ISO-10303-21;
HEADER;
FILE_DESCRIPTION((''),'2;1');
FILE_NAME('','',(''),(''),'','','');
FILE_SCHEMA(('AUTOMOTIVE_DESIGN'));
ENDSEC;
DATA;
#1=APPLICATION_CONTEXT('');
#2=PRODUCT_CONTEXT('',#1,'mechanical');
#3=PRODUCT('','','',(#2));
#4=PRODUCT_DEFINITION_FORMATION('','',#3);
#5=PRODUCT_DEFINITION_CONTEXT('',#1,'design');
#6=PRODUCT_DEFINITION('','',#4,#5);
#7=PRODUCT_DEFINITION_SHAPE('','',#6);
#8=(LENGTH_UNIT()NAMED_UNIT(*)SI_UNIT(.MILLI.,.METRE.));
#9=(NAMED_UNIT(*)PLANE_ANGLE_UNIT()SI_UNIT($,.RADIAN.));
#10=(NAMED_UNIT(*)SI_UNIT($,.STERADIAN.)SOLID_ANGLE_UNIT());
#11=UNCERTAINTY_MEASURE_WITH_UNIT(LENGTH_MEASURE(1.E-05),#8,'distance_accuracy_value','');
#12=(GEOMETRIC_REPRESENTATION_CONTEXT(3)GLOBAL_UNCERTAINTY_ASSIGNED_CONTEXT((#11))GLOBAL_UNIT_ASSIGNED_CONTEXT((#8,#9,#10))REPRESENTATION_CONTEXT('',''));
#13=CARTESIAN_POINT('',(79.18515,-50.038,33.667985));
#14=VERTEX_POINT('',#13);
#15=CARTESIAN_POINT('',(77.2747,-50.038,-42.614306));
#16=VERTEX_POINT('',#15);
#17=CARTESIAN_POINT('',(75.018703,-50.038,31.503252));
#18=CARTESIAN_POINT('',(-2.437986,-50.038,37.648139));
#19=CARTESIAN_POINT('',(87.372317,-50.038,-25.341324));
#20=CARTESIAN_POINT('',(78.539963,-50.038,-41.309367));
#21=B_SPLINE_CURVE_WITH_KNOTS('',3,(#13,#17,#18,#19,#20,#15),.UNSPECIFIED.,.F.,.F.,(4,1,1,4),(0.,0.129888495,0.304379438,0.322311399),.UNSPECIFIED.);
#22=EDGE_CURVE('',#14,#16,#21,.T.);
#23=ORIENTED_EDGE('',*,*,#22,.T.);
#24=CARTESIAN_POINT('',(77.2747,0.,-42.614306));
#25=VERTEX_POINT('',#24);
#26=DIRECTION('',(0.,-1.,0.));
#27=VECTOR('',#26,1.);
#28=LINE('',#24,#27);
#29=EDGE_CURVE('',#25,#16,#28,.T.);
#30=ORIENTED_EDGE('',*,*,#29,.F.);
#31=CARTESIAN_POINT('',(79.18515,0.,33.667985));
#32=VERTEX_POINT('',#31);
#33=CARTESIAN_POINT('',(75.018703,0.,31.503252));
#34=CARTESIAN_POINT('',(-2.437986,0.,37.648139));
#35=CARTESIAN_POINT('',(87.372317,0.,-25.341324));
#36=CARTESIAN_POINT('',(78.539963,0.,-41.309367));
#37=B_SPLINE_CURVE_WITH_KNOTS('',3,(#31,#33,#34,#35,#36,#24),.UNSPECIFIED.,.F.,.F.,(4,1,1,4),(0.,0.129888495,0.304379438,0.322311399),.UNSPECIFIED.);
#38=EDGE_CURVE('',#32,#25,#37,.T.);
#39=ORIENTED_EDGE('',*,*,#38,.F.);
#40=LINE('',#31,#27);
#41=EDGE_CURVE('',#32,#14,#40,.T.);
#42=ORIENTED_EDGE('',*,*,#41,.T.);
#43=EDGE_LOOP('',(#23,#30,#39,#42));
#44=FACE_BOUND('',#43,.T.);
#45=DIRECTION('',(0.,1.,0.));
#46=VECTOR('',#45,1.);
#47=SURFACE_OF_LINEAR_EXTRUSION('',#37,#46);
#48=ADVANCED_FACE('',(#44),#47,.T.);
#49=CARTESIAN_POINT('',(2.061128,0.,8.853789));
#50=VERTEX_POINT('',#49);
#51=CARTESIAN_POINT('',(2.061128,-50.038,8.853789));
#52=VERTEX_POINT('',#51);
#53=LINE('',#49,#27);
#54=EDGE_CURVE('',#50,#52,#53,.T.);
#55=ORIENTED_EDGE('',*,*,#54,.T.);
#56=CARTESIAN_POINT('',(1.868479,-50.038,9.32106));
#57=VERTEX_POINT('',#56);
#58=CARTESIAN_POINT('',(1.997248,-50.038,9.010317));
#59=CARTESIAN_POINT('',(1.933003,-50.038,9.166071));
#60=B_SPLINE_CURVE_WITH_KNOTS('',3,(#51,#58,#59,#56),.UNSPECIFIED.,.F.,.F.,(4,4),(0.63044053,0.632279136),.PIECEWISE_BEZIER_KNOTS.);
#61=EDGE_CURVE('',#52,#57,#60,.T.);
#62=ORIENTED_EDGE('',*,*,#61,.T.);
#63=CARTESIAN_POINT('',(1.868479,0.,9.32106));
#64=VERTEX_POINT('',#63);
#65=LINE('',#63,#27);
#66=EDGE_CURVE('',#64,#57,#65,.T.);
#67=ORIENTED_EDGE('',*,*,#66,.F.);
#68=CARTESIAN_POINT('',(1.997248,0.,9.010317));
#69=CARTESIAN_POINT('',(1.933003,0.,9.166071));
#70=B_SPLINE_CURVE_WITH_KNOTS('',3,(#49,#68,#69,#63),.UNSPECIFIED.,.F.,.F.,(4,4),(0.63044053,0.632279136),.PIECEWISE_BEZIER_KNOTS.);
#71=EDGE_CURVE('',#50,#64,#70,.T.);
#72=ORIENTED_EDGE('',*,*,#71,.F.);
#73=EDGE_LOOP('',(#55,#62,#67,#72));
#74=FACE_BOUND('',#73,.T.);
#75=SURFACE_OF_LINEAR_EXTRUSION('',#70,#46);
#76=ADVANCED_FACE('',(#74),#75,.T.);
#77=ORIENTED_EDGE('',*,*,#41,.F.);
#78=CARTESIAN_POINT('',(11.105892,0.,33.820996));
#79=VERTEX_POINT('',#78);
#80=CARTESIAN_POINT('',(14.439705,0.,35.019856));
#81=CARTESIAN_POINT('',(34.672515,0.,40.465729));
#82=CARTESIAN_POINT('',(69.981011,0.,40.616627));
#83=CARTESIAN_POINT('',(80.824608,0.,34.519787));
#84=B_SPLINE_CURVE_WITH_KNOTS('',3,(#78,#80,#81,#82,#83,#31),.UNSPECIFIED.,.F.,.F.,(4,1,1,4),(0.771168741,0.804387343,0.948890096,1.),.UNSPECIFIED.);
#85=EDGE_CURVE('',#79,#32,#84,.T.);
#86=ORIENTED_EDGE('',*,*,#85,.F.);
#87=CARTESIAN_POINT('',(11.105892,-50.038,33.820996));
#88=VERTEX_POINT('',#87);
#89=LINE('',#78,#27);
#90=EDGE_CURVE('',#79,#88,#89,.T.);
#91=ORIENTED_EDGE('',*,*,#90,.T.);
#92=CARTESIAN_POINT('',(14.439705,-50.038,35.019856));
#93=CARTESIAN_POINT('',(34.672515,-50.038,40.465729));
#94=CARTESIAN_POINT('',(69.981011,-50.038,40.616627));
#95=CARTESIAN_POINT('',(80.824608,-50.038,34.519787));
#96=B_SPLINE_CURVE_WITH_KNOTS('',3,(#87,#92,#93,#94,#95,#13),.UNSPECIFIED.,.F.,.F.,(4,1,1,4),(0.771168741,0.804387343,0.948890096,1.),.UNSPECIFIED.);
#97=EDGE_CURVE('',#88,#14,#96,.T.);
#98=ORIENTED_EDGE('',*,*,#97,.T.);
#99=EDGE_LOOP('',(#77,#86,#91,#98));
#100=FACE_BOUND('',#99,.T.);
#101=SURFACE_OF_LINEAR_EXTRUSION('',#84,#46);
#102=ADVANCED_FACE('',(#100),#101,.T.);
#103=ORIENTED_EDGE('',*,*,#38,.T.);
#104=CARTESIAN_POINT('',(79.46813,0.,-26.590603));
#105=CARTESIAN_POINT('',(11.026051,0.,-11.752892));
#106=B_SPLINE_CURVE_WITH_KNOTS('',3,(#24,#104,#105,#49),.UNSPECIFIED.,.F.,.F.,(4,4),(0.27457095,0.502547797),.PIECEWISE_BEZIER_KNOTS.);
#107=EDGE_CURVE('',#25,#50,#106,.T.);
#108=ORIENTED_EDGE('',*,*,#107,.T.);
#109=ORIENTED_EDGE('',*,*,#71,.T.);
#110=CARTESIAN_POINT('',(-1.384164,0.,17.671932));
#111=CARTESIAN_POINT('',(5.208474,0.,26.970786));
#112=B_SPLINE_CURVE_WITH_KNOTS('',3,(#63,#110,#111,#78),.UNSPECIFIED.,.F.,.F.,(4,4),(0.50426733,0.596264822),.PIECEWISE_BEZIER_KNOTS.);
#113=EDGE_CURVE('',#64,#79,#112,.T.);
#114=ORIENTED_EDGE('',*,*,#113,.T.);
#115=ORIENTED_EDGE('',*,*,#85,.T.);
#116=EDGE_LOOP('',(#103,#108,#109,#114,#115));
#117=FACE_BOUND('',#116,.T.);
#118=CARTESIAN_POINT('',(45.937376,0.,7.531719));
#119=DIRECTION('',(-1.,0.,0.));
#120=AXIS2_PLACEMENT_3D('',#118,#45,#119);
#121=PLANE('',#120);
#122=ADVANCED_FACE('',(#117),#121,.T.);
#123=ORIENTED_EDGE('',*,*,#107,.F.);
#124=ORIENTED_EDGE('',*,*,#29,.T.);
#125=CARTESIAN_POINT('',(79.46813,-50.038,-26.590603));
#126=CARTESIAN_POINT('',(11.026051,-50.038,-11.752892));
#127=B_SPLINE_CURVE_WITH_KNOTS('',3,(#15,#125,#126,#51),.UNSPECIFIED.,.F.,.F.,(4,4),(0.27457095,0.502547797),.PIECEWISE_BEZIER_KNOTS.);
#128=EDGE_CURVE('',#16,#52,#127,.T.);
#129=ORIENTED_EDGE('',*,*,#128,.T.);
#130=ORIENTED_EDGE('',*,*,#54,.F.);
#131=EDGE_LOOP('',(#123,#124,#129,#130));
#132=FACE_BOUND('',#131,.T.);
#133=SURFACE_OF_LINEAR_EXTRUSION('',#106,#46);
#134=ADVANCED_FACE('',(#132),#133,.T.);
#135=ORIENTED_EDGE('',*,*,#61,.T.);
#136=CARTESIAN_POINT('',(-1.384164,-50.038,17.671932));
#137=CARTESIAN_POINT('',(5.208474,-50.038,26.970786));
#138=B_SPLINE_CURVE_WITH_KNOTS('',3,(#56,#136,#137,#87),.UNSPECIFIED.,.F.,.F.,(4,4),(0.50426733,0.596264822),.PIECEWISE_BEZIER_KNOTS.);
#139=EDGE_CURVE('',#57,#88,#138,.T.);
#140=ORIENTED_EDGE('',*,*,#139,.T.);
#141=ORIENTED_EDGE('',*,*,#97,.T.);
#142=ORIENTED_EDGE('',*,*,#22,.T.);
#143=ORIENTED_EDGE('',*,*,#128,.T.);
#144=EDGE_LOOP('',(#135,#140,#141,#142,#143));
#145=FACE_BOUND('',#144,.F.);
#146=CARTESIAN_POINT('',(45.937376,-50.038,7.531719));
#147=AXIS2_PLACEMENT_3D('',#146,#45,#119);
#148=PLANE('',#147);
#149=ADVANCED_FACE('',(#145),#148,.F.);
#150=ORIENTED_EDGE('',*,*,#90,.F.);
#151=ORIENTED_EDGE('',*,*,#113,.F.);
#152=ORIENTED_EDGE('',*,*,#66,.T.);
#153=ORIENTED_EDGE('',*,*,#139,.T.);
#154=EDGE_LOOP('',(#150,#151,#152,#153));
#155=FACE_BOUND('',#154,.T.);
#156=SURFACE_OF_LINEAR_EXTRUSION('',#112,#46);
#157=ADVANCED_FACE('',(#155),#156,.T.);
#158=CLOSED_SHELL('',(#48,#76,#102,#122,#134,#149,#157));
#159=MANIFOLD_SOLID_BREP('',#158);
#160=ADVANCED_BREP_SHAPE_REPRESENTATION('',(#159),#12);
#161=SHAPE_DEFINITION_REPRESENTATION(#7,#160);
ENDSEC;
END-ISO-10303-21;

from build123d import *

# Parameters (mm, degrees)
F1_DEPTH = 50.038


with BuildPart() as f1:
    # F0 (on Front) → F1 (new body)
    with BuildSketch(Plane.XZ):
        with BuildLine():
            add(Edge.make_bspline(
                [(79.1851501145, 33.667985141), (75.0187026574, 31.503252156), (-2.4379861385, 37.6481391794), (87.3723170721, -25.341323607), (78.5399634882, -41.3093671709), (77.274699503, -42.6143057432)],
                knots=[0, 0, 0, 0, 0.1298884954, 0.304379438, 0.3223113992, 0.3223113992, 0.3223113992, 0.3223113992], degree=3))
            add(Edge.make_bspline(
                [(11.1058921605, 33.8209956614), (14.4397051782, 35.019855662), (34.6725145866, 40.4657294514), (69.9810109278, 40.6166271778), (80.8246080885, 34.5197872555), (79.1851501145, 33.667985141)],
                knots=[0.771168741, 0.771168741, 0.771168741, 0.771168741, 0.8043873432, 0.948890096, 1, 1, 1, 1], degree=3))
            add(Edge.make_bspline(
                [(1.8684788003, 9.321059509), (-1.3841643437, 17.6719319964), (5.2084741646, 26.9707864304), (11.1058921562, 33.8209956571)],
                knots=[0.5042673301, 0.5042673301, 0.5042673301, 0.5042673301, 0.5962648223, 0.5962648223, 0.5962648223, 0.5962648223], degree=3))
            add(Edge.make_bspline(
                [(2.0611278183, 8.853789435), (1.9972476452, 9.0103169518), (1.9330033894, 9.1660713289), (1.8684788033, 9.3210595026)],
                knots=[0.6304405304, 0.6304405304, 0.6304405304, 0.6304405304, 0.6322791361, 0.6322791361, 0.6322791361, 0.6322791361], degree=3))
            add(Edge.make_bspline(
                [(77.274699503, -42.6143057432), (79.4681300041, -26.5906033467), (11.0260514961, -11.7528920899), (2.0611278183, 8.853789435)],
                knots=[0.2745709496, 0.2745709496, 0.2745709496, 0.2745709496, 0.5025477969, 0.5025477969, 0.5025477969, 0.5025477969], degree=3))
        make_face()
    extrude(amount=F1_DEPTH)


solid = f1.part
